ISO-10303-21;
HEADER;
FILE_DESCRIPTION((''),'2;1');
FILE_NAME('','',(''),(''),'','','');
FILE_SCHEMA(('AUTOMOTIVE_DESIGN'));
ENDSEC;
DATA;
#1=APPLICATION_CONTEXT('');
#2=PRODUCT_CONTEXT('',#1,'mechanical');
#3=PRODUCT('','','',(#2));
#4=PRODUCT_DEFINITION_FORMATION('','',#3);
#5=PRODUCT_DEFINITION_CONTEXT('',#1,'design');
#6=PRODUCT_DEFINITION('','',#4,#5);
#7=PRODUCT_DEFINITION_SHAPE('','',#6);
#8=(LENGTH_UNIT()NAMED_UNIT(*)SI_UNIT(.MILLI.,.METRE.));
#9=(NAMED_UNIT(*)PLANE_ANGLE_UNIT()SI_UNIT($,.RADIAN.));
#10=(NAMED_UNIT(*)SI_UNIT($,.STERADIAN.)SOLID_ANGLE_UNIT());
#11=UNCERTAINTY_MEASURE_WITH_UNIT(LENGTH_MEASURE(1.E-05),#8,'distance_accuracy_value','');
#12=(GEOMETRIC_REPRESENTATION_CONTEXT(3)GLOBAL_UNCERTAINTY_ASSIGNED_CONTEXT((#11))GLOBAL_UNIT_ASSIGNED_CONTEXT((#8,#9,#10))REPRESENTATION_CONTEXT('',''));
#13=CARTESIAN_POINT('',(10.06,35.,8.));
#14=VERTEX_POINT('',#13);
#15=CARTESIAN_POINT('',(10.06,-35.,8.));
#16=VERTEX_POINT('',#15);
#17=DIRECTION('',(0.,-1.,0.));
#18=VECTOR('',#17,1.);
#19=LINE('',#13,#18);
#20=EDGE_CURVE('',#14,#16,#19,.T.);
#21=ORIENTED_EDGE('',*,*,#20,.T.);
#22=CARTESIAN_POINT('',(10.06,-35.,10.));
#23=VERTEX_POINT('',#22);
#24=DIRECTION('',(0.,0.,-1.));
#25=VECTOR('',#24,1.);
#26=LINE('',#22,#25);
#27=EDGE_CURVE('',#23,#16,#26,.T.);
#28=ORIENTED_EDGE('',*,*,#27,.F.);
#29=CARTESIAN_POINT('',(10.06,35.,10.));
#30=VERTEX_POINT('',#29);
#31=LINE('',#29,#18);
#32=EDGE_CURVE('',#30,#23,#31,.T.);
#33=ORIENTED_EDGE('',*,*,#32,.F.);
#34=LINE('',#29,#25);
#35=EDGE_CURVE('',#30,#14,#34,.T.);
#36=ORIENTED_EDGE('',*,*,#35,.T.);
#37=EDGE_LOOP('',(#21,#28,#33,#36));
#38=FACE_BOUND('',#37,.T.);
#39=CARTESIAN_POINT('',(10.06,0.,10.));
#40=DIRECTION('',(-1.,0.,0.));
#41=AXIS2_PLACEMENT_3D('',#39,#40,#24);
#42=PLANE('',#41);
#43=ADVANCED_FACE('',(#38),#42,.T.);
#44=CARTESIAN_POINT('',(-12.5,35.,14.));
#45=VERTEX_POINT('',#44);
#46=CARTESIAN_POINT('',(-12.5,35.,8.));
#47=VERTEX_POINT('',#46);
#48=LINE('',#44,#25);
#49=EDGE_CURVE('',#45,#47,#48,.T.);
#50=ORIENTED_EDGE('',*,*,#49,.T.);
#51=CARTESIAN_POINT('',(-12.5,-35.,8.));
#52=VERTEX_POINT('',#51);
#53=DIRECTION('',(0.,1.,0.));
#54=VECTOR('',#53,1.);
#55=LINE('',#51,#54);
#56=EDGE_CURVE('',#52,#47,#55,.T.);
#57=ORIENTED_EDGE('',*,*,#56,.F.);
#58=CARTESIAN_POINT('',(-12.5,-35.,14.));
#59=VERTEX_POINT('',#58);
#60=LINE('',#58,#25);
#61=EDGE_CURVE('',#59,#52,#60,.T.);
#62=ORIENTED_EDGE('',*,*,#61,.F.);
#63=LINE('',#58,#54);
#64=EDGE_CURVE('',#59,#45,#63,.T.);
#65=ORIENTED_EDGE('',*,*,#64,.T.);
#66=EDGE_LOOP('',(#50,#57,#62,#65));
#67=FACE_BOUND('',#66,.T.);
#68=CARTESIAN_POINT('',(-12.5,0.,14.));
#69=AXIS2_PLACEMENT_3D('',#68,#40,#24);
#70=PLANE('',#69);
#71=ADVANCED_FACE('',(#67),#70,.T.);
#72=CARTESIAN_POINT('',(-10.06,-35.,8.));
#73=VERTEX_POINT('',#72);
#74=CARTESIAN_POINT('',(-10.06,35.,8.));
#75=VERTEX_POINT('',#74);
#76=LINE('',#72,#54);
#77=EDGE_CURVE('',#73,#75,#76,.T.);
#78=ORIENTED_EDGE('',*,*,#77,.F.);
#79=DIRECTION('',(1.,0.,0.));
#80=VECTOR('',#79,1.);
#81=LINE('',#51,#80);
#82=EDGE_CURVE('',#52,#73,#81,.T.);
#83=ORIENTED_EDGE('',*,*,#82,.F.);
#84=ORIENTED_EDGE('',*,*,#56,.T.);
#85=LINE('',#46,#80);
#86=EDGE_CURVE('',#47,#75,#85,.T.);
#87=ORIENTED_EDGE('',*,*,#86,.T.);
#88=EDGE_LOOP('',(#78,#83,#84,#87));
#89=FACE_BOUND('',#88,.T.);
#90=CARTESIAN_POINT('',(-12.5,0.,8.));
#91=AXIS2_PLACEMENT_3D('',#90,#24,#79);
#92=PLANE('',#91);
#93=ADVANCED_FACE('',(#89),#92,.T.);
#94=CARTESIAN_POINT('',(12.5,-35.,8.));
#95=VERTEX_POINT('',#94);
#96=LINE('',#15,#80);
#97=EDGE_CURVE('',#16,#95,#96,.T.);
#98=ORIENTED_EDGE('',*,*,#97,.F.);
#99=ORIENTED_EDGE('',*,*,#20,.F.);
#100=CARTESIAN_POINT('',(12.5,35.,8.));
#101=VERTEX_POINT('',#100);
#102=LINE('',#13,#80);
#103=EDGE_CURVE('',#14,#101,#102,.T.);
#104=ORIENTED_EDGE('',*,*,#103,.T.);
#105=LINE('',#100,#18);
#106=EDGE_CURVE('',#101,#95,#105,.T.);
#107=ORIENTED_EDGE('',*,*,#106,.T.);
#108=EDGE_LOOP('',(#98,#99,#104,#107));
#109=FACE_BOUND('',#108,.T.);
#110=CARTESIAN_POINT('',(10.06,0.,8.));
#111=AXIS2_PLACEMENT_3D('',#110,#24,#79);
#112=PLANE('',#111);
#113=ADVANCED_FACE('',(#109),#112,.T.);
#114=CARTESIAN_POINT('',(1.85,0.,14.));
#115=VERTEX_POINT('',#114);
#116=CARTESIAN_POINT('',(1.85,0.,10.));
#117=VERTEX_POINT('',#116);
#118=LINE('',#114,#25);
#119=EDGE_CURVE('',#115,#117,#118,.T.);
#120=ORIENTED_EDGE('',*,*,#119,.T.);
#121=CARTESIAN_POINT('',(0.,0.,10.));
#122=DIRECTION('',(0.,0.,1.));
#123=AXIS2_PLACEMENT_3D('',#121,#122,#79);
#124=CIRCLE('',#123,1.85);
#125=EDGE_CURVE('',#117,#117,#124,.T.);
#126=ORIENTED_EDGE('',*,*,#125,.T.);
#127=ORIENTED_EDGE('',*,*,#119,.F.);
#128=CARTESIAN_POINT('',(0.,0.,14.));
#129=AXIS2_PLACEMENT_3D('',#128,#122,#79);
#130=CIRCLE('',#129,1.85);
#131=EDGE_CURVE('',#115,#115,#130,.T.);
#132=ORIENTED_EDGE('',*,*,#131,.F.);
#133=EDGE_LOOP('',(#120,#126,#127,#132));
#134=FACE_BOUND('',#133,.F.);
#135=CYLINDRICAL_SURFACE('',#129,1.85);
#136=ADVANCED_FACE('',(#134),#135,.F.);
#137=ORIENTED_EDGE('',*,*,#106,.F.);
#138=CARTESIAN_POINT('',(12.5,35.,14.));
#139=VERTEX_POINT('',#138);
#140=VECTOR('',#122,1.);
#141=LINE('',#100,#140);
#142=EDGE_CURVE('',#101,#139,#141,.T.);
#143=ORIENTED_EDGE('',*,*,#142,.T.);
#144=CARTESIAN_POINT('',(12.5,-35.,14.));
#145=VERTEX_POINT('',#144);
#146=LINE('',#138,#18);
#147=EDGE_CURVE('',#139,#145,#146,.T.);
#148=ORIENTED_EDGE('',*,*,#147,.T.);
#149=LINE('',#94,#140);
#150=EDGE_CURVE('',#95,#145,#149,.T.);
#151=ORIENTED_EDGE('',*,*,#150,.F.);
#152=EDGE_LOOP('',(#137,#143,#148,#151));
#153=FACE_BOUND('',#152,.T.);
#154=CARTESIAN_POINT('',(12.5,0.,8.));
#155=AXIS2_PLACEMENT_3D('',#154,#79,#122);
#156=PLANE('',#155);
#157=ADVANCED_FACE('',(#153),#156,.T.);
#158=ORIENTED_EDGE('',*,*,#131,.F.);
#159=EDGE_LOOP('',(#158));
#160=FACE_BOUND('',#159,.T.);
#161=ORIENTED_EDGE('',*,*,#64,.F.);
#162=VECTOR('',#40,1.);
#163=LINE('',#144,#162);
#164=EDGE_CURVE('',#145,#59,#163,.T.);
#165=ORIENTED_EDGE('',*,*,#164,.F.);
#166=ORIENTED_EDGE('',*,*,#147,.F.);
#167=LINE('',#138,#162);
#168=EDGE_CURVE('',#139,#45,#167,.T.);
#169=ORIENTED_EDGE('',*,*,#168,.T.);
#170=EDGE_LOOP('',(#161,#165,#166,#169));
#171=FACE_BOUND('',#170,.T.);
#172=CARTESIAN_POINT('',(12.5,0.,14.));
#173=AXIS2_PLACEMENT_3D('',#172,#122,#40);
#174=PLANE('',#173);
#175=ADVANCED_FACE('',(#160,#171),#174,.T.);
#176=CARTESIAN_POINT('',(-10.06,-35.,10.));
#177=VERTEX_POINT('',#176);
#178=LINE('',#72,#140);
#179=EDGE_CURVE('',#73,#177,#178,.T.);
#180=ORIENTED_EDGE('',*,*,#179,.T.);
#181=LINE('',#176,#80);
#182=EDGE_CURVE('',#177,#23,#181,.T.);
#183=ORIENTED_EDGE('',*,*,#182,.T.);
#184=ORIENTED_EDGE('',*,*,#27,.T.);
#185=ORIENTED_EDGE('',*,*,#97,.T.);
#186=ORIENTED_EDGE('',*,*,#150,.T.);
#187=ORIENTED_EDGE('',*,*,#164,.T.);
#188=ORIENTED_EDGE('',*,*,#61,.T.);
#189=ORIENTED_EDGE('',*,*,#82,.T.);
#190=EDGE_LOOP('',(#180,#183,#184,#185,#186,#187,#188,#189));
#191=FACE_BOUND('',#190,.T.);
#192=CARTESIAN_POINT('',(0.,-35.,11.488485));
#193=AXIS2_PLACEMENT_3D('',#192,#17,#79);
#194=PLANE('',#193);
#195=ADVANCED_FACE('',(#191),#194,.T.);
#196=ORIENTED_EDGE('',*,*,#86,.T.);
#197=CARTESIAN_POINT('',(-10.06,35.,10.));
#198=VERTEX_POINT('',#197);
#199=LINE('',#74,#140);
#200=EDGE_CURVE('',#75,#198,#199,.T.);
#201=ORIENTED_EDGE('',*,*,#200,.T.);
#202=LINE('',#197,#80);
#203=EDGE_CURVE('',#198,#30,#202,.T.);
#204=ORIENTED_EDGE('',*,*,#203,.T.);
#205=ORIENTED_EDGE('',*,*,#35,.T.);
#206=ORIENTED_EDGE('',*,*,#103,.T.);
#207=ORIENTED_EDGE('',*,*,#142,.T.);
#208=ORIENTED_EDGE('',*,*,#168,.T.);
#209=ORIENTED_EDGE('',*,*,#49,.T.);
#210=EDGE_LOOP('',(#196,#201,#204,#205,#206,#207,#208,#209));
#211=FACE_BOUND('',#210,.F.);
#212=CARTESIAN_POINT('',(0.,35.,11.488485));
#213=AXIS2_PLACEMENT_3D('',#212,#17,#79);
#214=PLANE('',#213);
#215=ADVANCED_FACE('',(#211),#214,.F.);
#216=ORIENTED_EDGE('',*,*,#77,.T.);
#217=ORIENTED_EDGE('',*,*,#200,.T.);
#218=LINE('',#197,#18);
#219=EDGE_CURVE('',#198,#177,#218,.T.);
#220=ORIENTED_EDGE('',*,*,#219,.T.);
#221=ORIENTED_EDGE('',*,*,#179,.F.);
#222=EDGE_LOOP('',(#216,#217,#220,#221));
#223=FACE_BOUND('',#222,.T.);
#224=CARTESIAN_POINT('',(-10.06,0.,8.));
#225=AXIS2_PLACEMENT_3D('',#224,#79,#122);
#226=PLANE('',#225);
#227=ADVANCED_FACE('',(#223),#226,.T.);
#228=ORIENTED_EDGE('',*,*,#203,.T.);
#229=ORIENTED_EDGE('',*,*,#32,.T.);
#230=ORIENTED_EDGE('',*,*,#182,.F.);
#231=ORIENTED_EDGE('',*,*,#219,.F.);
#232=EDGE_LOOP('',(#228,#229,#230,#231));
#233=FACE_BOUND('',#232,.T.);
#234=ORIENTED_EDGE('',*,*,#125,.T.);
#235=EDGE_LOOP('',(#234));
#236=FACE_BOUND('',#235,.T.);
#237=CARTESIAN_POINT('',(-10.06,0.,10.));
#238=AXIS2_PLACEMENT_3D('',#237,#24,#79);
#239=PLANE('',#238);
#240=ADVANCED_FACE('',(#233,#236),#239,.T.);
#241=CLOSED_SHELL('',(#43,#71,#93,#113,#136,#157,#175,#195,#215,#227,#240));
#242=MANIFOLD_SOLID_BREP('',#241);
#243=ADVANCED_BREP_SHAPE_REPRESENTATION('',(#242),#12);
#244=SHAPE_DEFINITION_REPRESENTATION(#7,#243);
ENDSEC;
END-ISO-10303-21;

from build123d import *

# Parameters (mm, degrees)
F1_DEPTH = 35
F2_R     = 1.85
F3_DEPTH = 6.001


# Not quite as in the source:
# - a feature names something its author has since deleted; it is built from what else it names


with BuildPart() as f1:
    # F0 (on Front) → F1 (new body, symmetric)
    with BuildSketch(Plane.XZ):
        Polygon((-10.06, 8), (-10.06, 10), (10.06, 10), (10.06, 8), (12.5, 8), (12.5, 14), (-12.5, 14), (-12.5, 8), align=None)
    extrude(amount=F1_DEPTH, both=True)

    # F2 (on face) → F3 (cut, through all)
    with BuildSketch(Plane.XY.offset(14)):
        Circle(F2_R)
    extrude(amount=-F3_DEPTH, mode=Mode.SUBTRACT)


solid = f1.part
